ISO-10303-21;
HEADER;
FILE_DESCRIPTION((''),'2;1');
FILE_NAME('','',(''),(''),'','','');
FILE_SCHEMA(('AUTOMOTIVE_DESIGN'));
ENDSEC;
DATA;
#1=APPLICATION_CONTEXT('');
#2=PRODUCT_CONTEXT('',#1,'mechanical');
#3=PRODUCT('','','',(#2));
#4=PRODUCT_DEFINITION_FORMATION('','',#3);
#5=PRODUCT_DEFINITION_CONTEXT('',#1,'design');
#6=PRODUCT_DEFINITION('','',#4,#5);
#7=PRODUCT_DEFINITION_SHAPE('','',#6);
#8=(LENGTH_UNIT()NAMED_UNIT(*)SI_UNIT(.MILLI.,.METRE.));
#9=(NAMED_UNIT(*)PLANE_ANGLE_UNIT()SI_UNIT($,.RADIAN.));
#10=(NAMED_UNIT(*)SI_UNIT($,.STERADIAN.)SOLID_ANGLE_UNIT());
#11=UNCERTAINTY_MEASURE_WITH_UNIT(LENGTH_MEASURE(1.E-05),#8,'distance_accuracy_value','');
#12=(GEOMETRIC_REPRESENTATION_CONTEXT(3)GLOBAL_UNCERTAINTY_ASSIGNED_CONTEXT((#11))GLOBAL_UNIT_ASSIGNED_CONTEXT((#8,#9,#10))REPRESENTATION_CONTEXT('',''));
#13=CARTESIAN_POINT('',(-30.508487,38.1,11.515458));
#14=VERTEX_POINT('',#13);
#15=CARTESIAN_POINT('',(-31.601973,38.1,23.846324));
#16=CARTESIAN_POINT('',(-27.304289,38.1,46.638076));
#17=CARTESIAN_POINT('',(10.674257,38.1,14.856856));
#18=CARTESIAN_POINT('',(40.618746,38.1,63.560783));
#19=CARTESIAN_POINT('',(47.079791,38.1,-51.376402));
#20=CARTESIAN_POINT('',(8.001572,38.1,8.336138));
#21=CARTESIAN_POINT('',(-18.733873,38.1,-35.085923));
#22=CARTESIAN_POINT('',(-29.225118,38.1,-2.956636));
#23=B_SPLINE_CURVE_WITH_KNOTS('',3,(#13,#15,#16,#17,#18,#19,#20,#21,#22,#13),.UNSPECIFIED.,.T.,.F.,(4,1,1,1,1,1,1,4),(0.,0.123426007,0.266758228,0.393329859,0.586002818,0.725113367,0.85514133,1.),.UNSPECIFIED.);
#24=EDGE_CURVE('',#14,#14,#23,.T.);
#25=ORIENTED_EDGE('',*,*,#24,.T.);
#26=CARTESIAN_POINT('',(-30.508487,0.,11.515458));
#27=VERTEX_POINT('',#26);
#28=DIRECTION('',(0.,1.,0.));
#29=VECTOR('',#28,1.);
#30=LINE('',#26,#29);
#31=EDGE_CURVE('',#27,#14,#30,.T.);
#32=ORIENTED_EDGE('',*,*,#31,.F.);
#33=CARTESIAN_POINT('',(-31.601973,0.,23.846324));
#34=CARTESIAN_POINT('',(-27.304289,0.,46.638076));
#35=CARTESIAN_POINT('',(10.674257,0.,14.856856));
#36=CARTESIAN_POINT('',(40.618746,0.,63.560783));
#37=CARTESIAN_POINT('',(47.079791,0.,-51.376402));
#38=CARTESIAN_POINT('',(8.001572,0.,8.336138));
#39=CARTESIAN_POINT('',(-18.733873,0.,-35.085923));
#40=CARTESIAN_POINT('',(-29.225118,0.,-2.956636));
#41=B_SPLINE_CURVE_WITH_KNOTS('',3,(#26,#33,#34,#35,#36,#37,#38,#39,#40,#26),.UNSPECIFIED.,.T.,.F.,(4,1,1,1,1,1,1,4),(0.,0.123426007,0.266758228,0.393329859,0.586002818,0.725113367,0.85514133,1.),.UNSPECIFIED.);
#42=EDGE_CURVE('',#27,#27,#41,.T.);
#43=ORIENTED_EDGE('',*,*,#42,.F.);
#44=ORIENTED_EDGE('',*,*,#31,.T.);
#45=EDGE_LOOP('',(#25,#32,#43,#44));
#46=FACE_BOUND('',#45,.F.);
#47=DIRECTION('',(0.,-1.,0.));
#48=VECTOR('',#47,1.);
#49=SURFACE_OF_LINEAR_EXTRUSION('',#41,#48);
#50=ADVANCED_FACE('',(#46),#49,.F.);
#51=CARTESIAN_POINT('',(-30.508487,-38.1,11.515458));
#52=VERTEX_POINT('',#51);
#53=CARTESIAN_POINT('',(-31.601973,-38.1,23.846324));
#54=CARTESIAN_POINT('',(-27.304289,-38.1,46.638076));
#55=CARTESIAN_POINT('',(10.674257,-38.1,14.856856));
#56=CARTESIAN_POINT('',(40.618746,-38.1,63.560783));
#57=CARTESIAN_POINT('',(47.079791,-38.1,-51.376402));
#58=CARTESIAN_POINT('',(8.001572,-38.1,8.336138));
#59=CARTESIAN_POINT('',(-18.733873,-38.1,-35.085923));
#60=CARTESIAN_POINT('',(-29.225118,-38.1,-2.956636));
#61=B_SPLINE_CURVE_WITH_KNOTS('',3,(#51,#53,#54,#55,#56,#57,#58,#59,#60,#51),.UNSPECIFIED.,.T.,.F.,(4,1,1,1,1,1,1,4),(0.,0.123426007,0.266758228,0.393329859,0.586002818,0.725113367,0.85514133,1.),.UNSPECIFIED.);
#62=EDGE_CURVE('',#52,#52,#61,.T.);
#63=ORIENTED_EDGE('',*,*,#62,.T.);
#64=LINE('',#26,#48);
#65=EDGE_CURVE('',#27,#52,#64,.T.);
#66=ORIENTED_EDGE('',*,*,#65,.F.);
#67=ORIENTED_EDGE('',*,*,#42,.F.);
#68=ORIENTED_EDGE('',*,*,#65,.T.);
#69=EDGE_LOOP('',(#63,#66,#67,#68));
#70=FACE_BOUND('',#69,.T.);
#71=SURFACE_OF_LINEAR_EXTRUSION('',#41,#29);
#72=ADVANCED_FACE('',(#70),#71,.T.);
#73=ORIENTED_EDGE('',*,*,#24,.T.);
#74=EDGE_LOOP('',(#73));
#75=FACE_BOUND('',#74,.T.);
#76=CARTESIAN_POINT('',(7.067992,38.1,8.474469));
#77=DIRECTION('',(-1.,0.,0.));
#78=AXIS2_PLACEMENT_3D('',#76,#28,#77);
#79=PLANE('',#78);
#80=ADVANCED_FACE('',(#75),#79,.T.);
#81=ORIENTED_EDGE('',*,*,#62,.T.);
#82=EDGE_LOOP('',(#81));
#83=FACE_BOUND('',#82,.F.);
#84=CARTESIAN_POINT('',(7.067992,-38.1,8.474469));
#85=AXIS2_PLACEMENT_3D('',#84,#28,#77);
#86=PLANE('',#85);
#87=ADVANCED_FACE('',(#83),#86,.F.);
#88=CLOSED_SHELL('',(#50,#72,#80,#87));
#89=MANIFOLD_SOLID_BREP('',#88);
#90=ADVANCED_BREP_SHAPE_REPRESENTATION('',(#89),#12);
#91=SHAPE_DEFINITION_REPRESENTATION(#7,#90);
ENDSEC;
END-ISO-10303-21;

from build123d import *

# Parameters (mm, degrees)
F1_DEPTH = 38.1


# Not quite as in the source:
# - the program builds the solid bodies; features that only make, move or delete a surface that nothing else refers to are left out


with BuildPart() as f1:
    # F0 (on Front) → F1 (new body, symmetric)
    with BuildSketch(Plane.XZ):
        with BuildLine():
            add(Edge.make_bspline(
                [(-30.508486554, 11.5154581144), (-31.6019733126, 23.8463236007), (-27.304289442, 46.6380760277), (10.6742573925, 14.8568561254), (40.6187456041, 63.5607828107), (47.0797908255, -51.3764017647), (8.0015721275, 8.3361382392), (-18.7338734511, -35.0859230495), (-29.225118154, -2.9566358411), (-30.508486554, 11.5154581144)],
                knots=[0, 0, 0, 0, 0.123426007, 0.2667582283, 0.3933298593, 0.5860028181, 0.7251133668, 0.8551413304, 1, 1, 1, 1], degree=3))
        make_face()
    extrude(amount=F1_DEPTH, both=True)


solid = f1.part
